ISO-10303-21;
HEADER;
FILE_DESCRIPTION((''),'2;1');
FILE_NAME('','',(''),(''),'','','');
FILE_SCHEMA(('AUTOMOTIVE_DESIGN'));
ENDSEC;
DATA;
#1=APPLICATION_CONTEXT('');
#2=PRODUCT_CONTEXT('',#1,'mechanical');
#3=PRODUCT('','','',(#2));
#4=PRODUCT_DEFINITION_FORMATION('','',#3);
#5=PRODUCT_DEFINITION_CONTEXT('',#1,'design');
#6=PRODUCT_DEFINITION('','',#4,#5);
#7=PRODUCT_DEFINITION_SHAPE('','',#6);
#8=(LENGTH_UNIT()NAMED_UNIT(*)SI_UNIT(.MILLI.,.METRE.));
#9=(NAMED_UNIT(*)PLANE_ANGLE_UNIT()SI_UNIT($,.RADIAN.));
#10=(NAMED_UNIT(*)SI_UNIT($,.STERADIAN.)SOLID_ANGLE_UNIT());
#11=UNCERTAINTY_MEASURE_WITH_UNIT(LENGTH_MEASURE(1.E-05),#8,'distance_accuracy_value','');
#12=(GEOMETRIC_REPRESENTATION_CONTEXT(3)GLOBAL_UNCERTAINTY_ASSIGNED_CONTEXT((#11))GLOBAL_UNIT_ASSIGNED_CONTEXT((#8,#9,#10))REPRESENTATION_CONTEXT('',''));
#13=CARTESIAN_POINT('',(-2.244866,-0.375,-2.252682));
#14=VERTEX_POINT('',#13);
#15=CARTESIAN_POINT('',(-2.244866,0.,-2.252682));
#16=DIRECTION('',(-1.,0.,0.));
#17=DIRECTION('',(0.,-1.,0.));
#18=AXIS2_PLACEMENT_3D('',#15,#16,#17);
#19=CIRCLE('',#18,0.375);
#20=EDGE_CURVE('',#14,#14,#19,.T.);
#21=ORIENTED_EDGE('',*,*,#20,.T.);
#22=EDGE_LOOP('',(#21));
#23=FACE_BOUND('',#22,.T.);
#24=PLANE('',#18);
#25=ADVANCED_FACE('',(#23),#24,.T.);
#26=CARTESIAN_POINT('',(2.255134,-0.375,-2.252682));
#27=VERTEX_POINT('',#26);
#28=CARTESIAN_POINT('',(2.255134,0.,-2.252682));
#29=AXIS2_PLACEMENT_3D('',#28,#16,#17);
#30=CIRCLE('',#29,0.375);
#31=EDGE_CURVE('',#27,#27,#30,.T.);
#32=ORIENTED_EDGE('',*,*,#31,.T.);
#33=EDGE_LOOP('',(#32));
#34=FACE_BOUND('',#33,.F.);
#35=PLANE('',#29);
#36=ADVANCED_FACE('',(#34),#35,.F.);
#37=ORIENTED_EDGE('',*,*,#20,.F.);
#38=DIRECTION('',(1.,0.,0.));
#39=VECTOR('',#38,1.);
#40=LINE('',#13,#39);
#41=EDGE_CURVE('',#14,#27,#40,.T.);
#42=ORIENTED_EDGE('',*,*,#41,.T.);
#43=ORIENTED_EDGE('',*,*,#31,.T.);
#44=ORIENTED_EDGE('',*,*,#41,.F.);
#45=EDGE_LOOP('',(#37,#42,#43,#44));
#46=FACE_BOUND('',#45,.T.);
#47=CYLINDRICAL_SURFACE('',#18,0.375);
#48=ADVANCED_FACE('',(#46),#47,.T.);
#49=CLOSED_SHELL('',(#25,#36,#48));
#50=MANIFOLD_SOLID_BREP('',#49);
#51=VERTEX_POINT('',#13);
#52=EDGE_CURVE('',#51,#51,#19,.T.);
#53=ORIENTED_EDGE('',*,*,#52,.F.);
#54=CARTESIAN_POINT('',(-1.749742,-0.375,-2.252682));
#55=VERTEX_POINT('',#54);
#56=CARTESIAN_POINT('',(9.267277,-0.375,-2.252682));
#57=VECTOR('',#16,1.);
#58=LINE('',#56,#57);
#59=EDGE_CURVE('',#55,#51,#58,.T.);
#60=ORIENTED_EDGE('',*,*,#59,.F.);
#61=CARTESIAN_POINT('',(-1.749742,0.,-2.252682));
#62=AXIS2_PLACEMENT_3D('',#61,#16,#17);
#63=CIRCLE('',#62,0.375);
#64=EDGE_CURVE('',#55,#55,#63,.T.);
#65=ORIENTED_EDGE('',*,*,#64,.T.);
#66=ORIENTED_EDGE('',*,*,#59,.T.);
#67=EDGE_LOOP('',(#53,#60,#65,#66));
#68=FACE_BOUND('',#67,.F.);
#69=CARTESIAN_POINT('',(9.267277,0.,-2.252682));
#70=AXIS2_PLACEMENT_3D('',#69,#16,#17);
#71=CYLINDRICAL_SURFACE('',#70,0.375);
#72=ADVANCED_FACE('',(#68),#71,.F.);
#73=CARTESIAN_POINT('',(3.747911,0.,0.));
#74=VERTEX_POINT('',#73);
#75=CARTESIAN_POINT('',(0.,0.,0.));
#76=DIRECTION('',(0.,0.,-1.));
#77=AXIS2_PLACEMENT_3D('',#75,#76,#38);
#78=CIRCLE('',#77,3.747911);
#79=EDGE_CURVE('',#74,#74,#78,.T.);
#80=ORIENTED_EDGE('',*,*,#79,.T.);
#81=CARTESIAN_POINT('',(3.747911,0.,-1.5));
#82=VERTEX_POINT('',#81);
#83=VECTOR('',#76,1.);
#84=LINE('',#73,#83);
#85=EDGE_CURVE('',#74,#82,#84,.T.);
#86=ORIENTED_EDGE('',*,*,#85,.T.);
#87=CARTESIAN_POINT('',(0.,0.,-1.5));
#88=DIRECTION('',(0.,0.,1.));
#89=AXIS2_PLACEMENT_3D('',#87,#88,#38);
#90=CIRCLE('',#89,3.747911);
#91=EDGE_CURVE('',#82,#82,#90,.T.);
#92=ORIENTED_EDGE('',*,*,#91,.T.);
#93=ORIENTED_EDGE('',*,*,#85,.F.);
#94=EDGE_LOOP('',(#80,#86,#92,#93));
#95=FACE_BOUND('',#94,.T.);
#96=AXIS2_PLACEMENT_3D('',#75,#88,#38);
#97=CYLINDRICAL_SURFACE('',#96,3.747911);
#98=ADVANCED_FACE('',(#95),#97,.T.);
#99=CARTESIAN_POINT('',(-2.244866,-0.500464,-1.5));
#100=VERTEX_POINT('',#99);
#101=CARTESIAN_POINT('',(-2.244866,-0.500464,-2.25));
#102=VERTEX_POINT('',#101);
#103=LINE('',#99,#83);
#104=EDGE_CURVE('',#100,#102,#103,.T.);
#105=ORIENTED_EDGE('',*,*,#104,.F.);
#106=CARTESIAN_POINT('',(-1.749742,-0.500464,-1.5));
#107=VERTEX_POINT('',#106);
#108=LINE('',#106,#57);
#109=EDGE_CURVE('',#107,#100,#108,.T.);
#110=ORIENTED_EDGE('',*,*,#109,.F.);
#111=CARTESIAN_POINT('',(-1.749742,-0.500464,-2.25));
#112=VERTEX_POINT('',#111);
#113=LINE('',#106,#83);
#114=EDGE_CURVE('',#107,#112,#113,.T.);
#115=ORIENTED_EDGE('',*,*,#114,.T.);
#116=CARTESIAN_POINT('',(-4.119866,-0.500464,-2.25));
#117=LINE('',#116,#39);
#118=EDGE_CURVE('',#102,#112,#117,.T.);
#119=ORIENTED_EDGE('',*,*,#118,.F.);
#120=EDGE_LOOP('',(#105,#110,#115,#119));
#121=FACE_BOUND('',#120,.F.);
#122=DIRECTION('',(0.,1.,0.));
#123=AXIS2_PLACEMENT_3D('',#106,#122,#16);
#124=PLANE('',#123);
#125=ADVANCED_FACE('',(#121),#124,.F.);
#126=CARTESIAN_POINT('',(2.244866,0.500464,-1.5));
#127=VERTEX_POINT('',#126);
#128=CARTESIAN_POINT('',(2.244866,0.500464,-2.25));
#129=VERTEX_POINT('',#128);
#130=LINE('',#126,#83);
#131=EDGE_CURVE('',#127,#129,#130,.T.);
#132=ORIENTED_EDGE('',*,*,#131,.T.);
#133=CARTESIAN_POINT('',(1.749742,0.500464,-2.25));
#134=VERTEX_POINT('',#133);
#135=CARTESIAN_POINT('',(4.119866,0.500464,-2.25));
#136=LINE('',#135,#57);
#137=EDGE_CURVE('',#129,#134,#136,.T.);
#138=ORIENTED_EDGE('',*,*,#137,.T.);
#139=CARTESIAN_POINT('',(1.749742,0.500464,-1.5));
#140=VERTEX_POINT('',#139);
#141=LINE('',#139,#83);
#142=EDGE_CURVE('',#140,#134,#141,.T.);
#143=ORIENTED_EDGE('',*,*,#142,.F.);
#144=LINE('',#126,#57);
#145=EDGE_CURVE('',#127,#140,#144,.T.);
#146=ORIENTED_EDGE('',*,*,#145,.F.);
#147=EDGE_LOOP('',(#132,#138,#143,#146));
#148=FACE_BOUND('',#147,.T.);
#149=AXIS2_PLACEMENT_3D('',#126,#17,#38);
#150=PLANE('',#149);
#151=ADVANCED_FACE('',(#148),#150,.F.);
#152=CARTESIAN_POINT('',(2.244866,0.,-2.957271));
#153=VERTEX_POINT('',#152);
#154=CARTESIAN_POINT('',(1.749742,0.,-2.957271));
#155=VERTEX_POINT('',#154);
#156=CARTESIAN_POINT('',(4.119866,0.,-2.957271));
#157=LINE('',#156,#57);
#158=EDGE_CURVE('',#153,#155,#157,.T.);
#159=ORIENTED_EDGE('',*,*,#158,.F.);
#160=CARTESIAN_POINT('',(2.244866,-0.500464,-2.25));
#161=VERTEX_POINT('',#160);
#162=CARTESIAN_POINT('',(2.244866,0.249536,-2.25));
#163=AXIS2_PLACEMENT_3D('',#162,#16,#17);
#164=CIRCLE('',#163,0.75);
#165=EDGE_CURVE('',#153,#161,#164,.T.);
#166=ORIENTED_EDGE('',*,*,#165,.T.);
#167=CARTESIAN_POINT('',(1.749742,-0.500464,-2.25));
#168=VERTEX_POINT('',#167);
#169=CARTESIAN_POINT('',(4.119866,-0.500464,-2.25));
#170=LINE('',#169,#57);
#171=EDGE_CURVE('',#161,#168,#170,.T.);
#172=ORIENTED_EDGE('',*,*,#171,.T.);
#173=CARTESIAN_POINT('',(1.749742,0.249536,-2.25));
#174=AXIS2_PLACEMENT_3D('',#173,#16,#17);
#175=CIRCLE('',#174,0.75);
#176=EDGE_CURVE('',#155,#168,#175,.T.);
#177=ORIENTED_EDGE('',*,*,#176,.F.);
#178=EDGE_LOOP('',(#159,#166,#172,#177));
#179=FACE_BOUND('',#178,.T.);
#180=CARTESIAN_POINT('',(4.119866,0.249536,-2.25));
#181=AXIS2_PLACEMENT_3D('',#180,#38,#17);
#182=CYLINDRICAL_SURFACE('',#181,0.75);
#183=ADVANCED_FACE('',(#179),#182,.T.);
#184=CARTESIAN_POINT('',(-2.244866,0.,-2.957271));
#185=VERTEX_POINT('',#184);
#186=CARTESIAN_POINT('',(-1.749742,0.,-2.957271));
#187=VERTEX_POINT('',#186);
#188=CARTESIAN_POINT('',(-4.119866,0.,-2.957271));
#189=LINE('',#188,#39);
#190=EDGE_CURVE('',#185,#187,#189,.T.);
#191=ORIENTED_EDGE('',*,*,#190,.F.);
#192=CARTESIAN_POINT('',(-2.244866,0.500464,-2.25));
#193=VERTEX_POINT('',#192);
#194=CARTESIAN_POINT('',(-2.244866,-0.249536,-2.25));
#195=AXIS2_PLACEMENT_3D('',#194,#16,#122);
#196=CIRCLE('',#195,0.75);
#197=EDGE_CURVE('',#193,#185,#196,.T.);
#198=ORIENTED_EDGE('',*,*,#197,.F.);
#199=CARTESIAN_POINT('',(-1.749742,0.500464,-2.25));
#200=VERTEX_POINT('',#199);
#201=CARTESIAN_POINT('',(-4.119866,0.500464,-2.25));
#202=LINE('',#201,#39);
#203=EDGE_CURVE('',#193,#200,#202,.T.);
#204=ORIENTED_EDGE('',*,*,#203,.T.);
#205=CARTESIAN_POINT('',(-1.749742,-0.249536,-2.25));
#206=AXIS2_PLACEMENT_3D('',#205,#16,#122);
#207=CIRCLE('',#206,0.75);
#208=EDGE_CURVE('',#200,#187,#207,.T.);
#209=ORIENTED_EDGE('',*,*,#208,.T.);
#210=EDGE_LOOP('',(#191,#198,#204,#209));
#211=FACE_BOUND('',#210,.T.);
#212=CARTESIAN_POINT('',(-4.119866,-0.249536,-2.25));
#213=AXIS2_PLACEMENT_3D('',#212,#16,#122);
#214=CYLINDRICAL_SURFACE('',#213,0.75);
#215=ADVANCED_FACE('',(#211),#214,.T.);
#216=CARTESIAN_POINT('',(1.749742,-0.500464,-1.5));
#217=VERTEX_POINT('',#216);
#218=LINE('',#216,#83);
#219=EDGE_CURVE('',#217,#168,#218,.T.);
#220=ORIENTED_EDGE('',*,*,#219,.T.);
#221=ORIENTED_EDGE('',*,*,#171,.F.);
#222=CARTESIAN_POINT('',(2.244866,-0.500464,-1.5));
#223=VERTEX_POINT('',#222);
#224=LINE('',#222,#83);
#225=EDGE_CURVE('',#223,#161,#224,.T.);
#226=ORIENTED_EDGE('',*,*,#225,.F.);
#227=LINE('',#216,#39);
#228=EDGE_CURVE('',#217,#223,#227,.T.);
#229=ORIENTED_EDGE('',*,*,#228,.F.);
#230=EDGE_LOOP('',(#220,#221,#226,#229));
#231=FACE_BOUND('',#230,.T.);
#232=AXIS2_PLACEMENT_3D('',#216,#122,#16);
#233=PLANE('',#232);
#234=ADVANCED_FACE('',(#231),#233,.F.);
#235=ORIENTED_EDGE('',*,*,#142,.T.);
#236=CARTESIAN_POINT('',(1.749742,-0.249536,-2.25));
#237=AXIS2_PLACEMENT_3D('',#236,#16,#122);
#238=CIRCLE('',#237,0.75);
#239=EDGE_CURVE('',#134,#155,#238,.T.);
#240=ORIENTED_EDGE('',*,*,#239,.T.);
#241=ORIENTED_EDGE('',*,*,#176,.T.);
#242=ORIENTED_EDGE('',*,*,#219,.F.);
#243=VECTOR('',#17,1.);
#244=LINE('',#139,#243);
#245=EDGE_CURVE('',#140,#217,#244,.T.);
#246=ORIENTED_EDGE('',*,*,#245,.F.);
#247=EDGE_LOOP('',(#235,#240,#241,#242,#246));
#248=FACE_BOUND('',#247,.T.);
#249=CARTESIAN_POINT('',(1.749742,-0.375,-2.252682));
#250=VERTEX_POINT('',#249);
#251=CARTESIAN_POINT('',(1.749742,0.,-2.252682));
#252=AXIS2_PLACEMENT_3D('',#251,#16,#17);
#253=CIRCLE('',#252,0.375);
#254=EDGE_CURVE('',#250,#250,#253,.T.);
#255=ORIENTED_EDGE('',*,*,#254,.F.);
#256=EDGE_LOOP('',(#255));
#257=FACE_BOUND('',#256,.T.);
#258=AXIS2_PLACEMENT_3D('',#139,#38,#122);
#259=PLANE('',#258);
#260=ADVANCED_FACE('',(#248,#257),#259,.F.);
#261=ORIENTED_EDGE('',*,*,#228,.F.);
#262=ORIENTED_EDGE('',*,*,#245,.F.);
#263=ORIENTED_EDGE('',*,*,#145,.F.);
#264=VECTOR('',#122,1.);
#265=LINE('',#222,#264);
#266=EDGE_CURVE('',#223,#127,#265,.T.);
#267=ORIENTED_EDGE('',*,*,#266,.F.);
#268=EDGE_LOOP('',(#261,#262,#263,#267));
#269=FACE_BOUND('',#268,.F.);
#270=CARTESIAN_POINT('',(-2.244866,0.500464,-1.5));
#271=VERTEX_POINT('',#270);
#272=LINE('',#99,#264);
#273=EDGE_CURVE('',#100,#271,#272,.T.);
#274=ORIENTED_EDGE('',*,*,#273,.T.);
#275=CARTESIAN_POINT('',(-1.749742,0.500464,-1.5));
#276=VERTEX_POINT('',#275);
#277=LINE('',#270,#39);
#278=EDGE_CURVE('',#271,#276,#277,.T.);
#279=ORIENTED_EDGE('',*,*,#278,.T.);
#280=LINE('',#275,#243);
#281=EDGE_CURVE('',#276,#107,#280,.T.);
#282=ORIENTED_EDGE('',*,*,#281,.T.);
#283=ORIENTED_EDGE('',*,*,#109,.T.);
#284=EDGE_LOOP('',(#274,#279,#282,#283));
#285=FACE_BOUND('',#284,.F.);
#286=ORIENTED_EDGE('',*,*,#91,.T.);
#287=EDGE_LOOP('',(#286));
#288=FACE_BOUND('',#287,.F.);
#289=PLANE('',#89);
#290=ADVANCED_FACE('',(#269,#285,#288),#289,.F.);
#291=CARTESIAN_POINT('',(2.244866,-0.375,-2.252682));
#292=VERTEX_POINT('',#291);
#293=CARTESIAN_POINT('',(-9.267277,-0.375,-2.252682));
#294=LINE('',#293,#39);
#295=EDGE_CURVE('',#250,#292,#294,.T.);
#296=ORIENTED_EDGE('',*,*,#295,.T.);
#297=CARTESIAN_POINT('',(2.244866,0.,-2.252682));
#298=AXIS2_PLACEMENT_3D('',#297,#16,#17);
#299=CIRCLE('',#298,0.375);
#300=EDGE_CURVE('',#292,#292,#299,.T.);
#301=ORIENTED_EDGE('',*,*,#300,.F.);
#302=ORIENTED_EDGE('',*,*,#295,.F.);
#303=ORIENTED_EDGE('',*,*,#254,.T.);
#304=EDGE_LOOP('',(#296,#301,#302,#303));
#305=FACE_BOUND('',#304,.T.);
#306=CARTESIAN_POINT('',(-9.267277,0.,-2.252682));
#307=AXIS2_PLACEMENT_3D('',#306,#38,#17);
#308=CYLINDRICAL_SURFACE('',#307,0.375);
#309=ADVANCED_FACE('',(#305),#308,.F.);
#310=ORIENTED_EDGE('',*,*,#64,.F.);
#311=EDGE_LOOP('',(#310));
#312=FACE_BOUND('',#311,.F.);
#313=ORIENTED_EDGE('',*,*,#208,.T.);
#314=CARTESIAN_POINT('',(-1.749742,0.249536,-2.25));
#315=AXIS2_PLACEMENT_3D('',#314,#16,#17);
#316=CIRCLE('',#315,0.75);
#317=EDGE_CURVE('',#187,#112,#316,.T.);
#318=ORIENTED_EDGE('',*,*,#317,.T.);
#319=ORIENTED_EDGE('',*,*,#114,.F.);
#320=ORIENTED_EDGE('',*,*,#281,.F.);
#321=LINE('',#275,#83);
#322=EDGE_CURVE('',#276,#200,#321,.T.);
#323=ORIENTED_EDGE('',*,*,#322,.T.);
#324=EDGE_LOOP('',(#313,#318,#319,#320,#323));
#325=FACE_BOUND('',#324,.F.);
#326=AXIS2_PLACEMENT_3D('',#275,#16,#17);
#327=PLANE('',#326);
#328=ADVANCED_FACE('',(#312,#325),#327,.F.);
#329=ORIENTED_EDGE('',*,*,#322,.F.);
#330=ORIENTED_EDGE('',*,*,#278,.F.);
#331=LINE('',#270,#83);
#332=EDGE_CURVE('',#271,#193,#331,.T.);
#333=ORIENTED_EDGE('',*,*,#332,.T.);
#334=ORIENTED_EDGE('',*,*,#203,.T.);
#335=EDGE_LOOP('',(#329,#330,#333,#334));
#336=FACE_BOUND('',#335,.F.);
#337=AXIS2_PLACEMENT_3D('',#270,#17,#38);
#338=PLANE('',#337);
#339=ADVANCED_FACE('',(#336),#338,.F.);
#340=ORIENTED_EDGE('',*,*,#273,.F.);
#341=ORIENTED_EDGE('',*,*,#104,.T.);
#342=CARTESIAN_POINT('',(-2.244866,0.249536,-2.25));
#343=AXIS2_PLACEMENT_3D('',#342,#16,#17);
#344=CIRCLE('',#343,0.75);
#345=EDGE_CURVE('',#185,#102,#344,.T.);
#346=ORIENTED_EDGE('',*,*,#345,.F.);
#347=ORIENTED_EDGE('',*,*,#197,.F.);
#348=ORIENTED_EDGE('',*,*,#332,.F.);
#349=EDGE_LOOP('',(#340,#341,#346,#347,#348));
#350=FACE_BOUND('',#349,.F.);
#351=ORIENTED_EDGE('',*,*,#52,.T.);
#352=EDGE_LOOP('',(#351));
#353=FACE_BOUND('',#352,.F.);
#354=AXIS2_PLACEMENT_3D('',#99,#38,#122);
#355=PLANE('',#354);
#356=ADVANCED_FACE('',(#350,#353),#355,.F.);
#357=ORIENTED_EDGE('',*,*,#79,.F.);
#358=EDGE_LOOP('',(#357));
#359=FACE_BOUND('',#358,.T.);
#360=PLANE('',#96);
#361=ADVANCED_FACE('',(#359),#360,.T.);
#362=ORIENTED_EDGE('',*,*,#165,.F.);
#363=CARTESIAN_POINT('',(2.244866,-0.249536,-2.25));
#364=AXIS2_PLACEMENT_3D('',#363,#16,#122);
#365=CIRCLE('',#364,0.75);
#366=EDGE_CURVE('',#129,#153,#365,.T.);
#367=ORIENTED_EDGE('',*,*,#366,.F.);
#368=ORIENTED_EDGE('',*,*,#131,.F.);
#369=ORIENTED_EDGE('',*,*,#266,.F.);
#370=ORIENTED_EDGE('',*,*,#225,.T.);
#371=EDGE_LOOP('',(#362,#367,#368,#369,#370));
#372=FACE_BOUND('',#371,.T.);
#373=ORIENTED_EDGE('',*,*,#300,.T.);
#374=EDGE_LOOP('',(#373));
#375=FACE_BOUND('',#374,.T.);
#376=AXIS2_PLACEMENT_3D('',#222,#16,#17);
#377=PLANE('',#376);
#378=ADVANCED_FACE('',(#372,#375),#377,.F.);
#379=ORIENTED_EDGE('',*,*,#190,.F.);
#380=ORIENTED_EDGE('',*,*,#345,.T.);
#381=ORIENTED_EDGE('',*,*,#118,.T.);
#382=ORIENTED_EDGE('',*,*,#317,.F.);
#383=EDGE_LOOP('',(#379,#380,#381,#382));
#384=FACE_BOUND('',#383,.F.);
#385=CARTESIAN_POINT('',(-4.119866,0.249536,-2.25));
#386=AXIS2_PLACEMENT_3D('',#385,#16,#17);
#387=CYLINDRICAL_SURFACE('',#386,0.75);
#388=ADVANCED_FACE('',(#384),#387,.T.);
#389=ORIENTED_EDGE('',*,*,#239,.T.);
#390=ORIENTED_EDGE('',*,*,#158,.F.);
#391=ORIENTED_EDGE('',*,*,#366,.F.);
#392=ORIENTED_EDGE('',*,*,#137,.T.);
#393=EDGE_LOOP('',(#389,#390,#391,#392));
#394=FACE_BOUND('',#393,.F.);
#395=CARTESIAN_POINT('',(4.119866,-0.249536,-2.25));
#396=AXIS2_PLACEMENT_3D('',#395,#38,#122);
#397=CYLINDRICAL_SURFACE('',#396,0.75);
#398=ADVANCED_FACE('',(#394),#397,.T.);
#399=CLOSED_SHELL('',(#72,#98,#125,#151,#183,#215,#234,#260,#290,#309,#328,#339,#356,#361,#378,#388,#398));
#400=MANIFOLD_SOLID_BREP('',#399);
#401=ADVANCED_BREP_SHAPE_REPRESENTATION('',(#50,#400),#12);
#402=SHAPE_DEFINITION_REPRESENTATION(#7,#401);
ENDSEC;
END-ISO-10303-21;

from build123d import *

# Parameters (mm, degrees)
F0_R        = 3.7479112611
F1_DEPTH    = 1.5
F3_DEPTH    = 1.5
F5_D        = 0.75
F6_T1_DEPTH = 4.2451243754
F8_R        = 0.375
F9_DEPTH    = 4.5


# Not quite as in the source:
# - a fillet or chamfer that OpenCascade refuses, or shapes differently, is made with other operations: its cross-section is extruded or revolved along the edge and cut away or added


with BuildPart() as f1:
    # F0 (on Top) → F1 (new body)
    with BuildSketch(Plane.XY):
        Circle(F0_R)
    extrude(amount=-F1_DEPTH)

    # F2 (on face) → F3 (join)
    with BuildSketch(Plane(origin=(0, 0, -1.5), x_dir=(1, 0, 0), z_dir=(0, 0, -1))):
        Polygon((-2.2448661039, -0.5004639388), (-1.7497417284, -0.5004639388), (-1.7497417284, 0), (-1.7497417284, 0.5004639388), (-2.2448661039, 0.5004639388), align=None)
    extrude(amount=F3_DEPTH)

    # F5 (through all)
    with Locations(Plane.YZ.offset(-1.7497417284)):
        with Locations((0, -2.2526816465)):
            Hole(F5_D / 2)

    # F6: fillet of radius 0.75 on 2 edges, made by hand

    # F6_s2 → F6_t1 (cut)
    with BuildSketch(Plane.YZ.offset(-4.1198661039)):
        with BuildLine():
            ThreePointArc((-0.5004639388, -2.25), (-0.2807940247, -2.7803300859), (0.2495360612, -3))
            Line((0.2495360612, -3), (-0.5004639388, -3))
            Line((-0.5004639388, -3), (-0.5004639388, -2.25))
        make_face()
        with BuildLine():
            ThreePointArc((0.5004639388, -2.25), (0.2807940247, -2.7803300859), (-0.2495360612, -3))
            Line((-0.2495360612, -3), (0.5004639388, -3))
            Line((0.5004639388, -3), (0.5004639388, -2.25))
        make_face()
    extrude(amount=F6_T1_DEPTH, mode=Mode.SUBTRACT)

    # F7: F1 across plane


with BuildPart() as f1_1:
    add(f1.part)
    add(f1.part.mirror(Plane.YZ))


with BuildPart() as f9:
    # F8 (on face) → F9 (new body)
    with BuildSketch(Plane(origin=(-2.2448661039, 0, 0), x_dir=(0, -1, 0), z_dir=(-1, 0, 0))):
        with Locations((0, -2.2526816465)):
            Circle(F8_R)
    extrude(amount=-F9_DEPTH)


solid = Compound([f1_1.part, f9.part])
